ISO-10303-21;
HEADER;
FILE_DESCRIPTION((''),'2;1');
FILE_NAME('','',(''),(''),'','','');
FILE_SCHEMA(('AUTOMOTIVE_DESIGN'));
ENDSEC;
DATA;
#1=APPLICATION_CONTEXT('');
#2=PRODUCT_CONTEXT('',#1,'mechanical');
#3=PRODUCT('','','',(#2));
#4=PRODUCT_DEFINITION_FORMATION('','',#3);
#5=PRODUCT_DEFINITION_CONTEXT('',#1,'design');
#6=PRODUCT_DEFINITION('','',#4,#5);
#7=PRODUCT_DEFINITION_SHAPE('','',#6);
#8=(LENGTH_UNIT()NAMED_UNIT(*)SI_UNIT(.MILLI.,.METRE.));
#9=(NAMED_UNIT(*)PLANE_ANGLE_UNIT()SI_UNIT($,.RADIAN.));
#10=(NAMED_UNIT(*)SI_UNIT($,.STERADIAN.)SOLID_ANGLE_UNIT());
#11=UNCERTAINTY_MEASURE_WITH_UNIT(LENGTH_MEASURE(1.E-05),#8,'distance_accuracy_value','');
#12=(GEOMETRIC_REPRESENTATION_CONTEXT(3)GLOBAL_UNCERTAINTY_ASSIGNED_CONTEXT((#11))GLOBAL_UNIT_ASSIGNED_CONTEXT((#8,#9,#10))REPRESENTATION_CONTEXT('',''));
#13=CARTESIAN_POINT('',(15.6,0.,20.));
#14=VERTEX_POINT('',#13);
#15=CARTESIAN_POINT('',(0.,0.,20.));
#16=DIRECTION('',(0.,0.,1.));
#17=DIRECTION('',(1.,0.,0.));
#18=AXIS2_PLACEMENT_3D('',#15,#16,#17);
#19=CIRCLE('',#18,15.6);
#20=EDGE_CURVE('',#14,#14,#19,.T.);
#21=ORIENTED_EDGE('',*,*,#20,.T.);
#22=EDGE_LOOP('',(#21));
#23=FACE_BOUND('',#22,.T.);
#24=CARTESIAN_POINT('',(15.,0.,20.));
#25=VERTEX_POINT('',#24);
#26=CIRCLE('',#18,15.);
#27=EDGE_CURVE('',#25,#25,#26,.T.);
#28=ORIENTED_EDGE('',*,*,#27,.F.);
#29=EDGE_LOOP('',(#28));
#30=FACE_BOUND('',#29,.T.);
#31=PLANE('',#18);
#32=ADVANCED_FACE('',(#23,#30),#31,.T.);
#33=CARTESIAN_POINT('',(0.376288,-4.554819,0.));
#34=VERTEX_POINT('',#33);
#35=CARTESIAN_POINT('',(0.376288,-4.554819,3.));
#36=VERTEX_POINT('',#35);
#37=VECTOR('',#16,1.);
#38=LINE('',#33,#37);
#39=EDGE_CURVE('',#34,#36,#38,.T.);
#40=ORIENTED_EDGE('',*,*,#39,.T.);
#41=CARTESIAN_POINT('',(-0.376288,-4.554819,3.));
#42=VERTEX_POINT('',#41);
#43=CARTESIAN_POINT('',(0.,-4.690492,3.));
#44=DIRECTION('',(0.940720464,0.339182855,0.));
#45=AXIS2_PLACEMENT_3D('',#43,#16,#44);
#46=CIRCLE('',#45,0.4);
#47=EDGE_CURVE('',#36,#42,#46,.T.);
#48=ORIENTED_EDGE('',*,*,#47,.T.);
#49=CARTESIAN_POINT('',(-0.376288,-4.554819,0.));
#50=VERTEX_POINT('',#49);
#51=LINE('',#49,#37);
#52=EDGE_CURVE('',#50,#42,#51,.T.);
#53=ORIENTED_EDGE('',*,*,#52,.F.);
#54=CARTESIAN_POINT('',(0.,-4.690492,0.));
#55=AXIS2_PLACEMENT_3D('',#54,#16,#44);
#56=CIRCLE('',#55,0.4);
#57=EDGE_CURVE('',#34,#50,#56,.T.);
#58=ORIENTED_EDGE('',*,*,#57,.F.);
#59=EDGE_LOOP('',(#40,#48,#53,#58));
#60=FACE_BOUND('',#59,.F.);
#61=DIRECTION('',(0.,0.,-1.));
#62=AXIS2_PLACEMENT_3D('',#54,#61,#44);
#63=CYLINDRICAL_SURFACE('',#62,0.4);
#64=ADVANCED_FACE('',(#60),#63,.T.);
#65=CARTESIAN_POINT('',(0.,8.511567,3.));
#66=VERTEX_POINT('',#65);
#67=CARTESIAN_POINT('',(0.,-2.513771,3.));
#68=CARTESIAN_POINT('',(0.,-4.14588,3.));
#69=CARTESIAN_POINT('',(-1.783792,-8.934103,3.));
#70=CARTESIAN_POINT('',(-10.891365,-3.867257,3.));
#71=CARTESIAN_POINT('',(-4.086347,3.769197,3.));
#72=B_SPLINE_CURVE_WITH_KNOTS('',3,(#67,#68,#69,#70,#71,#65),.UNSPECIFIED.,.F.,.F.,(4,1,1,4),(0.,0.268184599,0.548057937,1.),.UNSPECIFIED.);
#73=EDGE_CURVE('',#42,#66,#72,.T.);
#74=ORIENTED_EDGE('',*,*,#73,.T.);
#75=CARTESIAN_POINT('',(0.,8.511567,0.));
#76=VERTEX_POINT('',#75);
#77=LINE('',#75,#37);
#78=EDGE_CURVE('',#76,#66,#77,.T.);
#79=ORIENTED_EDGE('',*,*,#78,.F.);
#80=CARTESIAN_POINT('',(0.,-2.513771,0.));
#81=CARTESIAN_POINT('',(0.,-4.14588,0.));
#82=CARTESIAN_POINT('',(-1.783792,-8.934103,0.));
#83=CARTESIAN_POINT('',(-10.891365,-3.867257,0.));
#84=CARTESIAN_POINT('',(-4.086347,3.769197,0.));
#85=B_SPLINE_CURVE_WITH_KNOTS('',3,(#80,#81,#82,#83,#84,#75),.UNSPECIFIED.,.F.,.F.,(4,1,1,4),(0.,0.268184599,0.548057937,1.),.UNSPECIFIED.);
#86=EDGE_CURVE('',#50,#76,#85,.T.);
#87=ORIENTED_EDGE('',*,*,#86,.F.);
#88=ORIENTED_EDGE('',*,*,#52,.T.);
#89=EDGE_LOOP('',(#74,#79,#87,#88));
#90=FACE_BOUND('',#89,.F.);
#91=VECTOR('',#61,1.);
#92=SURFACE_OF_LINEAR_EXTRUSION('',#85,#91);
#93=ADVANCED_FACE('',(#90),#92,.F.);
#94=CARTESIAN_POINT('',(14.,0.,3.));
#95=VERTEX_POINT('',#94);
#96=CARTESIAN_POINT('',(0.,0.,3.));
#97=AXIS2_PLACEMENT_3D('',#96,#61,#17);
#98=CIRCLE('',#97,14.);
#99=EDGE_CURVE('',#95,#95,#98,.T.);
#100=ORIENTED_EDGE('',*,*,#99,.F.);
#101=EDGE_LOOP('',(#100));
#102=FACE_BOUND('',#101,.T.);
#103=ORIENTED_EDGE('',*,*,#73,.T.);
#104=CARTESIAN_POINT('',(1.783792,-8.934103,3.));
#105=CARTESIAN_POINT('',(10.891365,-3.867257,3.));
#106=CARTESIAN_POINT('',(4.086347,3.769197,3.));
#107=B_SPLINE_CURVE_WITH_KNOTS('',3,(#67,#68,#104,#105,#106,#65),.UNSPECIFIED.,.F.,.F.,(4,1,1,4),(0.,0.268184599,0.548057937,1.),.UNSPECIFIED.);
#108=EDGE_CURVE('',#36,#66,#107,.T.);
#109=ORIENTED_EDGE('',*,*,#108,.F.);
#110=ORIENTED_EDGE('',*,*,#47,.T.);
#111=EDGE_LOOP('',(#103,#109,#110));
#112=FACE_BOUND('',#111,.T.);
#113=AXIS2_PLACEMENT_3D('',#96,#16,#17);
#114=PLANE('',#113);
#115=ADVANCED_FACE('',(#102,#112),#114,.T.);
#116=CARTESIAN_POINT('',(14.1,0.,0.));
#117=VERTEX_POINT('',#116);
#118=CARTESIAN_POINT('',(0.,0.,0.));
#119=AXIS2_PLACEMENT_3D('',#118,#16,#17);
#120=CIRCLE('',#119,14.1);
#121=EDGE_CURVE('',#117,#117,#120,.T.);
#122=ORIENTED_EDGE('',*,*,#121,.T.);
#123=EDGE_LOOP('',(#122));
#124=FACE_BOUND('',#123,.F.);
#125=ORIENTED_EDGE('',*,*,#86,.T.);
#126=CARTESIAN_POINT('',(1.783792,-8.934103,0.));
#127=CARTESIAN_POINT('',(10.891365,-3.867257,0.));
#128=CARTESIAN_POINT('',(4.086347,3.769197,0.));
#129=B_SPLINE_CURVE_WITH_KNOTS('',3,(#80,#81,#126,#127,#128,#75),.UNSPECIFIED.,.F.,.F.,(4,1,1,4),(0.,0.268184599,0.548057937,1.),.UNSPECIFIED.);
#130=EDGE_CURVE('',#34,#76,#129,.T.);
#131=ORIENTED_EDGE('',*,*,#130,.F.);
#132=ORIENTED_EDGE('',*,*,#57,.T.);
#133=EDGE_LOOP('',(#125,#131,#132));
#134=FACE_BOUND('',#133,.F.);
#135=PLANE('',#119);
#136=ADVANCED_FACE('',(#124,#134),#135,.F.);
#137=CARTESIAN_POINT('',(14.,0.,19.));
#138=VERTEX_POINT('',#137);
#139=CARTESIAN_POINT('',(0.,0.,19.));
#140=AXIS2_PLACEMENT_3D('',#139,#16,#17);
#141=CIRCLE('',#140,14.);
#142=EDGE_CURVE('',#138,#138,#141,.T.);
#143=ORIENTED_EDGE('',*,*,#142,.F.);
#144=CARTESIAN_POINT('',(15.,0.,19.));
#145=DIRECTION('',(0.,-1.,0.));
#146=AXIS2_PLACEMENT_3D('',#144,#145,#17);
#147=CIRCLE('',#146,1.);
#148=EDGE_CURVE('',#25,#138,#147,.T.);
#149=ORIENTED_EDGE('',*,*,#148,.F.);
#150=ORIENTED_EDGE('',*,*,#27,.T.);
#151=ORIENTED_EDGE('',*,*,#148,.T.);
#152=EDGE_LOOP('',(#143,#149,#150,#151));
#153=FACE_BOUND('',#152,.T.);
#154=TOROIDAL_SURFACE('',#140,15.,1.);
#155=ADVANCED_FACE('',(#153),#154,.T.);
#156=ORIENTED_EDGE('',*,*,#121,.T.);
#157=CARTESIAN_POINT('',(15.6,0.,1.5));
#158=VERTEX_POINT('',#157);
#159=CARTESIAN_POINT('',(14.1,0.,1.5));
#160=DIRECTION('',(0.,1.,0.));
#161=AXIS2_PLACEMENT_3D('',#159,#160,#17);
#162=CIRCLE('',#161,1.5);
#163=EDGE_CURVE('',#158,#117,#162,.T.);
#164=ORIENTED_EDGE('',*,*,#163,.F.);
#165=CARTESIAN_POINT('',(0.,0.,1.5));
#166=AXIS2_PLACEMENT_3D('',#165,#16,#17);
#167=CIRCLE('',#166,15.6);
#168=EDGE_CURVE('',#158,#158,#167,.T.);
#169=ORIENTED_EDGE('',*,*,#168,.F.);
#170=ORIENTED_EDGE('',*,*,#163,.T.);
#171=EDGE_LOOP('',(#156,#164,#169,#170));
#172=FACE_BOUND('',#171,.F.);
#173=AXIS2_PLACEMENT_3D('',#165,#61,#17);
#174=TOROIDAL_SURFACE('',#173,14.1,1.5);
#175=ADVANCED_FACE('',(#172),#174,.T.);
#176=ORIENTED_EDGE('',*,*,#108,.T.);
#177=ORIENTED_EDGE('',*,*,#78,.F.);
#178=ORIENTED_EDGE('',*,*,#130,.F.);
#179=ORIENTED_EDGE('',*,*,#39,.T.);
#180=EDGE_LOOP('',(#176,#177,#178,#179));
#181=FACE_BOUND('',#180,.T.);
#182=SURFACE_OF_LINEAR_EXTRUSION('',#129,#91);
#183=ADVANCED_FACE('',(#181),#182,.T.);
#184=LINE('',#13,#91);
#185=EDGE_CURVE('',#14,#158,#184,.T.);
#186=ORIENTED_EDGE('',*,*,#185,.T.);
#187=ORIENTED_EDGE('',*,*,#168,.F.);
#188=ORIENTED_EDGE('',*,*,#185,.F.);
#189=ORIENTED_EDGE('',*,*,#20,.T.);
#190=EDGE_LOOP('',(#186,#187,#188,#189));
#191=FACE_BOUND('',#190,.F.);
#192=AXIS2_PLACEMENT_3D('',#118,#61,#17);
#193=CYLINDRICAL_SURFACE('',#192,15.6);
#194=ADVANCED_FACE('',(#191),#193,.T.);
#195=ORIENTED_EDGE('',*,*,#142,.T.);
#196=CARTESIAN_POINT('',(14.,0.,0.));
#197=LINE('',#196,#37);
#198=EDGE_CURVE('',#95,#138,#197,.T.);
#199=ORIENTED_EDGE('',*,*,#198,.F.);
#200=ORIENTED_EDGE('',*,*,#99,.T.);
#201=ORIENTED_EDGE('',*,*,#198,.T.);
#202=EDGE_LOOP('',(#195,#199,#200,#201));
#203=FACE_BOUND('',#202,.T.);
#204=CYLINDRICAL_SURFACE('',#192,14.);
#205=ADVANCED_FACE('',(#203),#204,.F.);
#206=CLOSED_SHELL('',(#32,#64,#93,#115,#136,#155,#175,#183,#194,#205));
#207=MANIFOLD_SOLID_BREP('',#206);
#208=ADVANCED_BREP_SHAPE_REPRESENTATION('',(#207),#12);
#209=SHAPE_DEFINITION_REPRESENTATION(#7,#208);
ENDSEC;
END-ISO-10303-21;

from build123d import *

# Parameters (mm, degrees)
F0_R        = 15.6
F0_R_2      = 14
F0_R_3      = 2
F1_DEPTH    = 3
F2_DEPTH    = 20
F3_R        = 1.5
F4_R        = 1
F5_R        = 2
F6_DEPTH    = 3
F7_T1_DEPTH = 3


# Not quite as in the source:
# - a fillet or chamfer that OpenCascade refuses, or shapes differently, is made with other operations: its cross-section is extruded or revolved along the edge and cut away or added


with BuildPart() as f1:
    # F0 (on Top) → F1 (new body)
    with BuildSketch(Plane.XY):
        Circle(F0_R)
        Circle(F0_R_2, mode=Mode.SUBTRACT)
        Circle(F0_R_2)
        Circle(F0_R_3, mode=Mode.SUBTRACT)
        Circle(F0_R_3)
    extrude(amount=F1_DEPTH)

    # F0 (on Top) → F2 (join)
    with BuildSketch(Plane.XY):
        Circle(F0_R)
        Circle(F0_R_2, mode=Mode.SUBTRACT)
    extrude(amount=F2_DEPTH)

    # F3
    f3_edges = [f1.edges().sort_by_distance(p)[0] for p in [
        (-15.6, 0, 0),
    ]]
    fillet(f3_edges, radius=F3_R)

    # F4
    f4_edges = [f1.edges().sort_by_distance(p)[0] for p in [
        (-14, 0, 20),
    ]]
    fillet(f4_edges, radius=F4_R)

    # F5 (on face) + F0 (on Top) → F6 (cut, through all)
    with BuildSketch(Plane.XY):
        with BuildLine():
            add(Edge.make_bspline(
                [(0, -2.5137708586), (0, -4.1458795261), (-1.7837920859, -8.9341028845), (-10.8913647651, -3.867257191), (-4.0863468312, 3.7691965699), (0, 8.5115667947)],
                knots=[0, 0, 0, 0, 0.2681845993, 0.5480579368, 1, 1, 1, 1], degree=3))
            add(Edge.make_bspline(
                [(0, -2.5137708586), (0, -4.1458795261), (1.7837920859, -8.9341028845), (10.8913647651, -3.867257191), (4.0863468312, 3.7691965699), (0, 8.5115667947)],
                knots=[0, 0, 0, 0, 0.2681845993, 0.5480579368, 1, 1, 1, 1], degree=3))
        make_face()
        Circle(F5_R, mode=Mode.SUBTRACT)
    with BuildSketch(Plane.XY):
        Circle(F0_R_3)
    extrude(amount=F6_DEPTH, mode=Mode.SUBTRACT)

    # F7: fillet of radius 0.4 on 1 edges, made by hand

    # F7_s2 → F7_t1 (cut)
    with BuildSketch(Plane.XY):
        with BuildLine():
            ThreePointArc((0.3762881855, -4.5548185088), (0, -4.2904916507), (-0.3762881855, -4.5548185088))
            Line((-0.3762881855, -4.5548185088), (-0.3838139492, -4.5521050459))
            ThreePointArc((-0.3838139492, -4.5521050459), (-0.1103093457, -3.5489845707), (-0.008, -2.5137708586))
            Line((-0.008, -2.5137708586), (0.008, -2.5137708586))
            ThreePointArc((0.008, -2.5137708586), (0.1103093457, -3.5489845707), (0.3838139492, -4.5521050459))
            Line((0.3838139492, -4.5521050459), (0.3762881855, -4.5548185088))
        make_face()
    extrude(amount=F7_T1_DEPTH, mode=Mode.SUBTRACT)


solid = f1.part
